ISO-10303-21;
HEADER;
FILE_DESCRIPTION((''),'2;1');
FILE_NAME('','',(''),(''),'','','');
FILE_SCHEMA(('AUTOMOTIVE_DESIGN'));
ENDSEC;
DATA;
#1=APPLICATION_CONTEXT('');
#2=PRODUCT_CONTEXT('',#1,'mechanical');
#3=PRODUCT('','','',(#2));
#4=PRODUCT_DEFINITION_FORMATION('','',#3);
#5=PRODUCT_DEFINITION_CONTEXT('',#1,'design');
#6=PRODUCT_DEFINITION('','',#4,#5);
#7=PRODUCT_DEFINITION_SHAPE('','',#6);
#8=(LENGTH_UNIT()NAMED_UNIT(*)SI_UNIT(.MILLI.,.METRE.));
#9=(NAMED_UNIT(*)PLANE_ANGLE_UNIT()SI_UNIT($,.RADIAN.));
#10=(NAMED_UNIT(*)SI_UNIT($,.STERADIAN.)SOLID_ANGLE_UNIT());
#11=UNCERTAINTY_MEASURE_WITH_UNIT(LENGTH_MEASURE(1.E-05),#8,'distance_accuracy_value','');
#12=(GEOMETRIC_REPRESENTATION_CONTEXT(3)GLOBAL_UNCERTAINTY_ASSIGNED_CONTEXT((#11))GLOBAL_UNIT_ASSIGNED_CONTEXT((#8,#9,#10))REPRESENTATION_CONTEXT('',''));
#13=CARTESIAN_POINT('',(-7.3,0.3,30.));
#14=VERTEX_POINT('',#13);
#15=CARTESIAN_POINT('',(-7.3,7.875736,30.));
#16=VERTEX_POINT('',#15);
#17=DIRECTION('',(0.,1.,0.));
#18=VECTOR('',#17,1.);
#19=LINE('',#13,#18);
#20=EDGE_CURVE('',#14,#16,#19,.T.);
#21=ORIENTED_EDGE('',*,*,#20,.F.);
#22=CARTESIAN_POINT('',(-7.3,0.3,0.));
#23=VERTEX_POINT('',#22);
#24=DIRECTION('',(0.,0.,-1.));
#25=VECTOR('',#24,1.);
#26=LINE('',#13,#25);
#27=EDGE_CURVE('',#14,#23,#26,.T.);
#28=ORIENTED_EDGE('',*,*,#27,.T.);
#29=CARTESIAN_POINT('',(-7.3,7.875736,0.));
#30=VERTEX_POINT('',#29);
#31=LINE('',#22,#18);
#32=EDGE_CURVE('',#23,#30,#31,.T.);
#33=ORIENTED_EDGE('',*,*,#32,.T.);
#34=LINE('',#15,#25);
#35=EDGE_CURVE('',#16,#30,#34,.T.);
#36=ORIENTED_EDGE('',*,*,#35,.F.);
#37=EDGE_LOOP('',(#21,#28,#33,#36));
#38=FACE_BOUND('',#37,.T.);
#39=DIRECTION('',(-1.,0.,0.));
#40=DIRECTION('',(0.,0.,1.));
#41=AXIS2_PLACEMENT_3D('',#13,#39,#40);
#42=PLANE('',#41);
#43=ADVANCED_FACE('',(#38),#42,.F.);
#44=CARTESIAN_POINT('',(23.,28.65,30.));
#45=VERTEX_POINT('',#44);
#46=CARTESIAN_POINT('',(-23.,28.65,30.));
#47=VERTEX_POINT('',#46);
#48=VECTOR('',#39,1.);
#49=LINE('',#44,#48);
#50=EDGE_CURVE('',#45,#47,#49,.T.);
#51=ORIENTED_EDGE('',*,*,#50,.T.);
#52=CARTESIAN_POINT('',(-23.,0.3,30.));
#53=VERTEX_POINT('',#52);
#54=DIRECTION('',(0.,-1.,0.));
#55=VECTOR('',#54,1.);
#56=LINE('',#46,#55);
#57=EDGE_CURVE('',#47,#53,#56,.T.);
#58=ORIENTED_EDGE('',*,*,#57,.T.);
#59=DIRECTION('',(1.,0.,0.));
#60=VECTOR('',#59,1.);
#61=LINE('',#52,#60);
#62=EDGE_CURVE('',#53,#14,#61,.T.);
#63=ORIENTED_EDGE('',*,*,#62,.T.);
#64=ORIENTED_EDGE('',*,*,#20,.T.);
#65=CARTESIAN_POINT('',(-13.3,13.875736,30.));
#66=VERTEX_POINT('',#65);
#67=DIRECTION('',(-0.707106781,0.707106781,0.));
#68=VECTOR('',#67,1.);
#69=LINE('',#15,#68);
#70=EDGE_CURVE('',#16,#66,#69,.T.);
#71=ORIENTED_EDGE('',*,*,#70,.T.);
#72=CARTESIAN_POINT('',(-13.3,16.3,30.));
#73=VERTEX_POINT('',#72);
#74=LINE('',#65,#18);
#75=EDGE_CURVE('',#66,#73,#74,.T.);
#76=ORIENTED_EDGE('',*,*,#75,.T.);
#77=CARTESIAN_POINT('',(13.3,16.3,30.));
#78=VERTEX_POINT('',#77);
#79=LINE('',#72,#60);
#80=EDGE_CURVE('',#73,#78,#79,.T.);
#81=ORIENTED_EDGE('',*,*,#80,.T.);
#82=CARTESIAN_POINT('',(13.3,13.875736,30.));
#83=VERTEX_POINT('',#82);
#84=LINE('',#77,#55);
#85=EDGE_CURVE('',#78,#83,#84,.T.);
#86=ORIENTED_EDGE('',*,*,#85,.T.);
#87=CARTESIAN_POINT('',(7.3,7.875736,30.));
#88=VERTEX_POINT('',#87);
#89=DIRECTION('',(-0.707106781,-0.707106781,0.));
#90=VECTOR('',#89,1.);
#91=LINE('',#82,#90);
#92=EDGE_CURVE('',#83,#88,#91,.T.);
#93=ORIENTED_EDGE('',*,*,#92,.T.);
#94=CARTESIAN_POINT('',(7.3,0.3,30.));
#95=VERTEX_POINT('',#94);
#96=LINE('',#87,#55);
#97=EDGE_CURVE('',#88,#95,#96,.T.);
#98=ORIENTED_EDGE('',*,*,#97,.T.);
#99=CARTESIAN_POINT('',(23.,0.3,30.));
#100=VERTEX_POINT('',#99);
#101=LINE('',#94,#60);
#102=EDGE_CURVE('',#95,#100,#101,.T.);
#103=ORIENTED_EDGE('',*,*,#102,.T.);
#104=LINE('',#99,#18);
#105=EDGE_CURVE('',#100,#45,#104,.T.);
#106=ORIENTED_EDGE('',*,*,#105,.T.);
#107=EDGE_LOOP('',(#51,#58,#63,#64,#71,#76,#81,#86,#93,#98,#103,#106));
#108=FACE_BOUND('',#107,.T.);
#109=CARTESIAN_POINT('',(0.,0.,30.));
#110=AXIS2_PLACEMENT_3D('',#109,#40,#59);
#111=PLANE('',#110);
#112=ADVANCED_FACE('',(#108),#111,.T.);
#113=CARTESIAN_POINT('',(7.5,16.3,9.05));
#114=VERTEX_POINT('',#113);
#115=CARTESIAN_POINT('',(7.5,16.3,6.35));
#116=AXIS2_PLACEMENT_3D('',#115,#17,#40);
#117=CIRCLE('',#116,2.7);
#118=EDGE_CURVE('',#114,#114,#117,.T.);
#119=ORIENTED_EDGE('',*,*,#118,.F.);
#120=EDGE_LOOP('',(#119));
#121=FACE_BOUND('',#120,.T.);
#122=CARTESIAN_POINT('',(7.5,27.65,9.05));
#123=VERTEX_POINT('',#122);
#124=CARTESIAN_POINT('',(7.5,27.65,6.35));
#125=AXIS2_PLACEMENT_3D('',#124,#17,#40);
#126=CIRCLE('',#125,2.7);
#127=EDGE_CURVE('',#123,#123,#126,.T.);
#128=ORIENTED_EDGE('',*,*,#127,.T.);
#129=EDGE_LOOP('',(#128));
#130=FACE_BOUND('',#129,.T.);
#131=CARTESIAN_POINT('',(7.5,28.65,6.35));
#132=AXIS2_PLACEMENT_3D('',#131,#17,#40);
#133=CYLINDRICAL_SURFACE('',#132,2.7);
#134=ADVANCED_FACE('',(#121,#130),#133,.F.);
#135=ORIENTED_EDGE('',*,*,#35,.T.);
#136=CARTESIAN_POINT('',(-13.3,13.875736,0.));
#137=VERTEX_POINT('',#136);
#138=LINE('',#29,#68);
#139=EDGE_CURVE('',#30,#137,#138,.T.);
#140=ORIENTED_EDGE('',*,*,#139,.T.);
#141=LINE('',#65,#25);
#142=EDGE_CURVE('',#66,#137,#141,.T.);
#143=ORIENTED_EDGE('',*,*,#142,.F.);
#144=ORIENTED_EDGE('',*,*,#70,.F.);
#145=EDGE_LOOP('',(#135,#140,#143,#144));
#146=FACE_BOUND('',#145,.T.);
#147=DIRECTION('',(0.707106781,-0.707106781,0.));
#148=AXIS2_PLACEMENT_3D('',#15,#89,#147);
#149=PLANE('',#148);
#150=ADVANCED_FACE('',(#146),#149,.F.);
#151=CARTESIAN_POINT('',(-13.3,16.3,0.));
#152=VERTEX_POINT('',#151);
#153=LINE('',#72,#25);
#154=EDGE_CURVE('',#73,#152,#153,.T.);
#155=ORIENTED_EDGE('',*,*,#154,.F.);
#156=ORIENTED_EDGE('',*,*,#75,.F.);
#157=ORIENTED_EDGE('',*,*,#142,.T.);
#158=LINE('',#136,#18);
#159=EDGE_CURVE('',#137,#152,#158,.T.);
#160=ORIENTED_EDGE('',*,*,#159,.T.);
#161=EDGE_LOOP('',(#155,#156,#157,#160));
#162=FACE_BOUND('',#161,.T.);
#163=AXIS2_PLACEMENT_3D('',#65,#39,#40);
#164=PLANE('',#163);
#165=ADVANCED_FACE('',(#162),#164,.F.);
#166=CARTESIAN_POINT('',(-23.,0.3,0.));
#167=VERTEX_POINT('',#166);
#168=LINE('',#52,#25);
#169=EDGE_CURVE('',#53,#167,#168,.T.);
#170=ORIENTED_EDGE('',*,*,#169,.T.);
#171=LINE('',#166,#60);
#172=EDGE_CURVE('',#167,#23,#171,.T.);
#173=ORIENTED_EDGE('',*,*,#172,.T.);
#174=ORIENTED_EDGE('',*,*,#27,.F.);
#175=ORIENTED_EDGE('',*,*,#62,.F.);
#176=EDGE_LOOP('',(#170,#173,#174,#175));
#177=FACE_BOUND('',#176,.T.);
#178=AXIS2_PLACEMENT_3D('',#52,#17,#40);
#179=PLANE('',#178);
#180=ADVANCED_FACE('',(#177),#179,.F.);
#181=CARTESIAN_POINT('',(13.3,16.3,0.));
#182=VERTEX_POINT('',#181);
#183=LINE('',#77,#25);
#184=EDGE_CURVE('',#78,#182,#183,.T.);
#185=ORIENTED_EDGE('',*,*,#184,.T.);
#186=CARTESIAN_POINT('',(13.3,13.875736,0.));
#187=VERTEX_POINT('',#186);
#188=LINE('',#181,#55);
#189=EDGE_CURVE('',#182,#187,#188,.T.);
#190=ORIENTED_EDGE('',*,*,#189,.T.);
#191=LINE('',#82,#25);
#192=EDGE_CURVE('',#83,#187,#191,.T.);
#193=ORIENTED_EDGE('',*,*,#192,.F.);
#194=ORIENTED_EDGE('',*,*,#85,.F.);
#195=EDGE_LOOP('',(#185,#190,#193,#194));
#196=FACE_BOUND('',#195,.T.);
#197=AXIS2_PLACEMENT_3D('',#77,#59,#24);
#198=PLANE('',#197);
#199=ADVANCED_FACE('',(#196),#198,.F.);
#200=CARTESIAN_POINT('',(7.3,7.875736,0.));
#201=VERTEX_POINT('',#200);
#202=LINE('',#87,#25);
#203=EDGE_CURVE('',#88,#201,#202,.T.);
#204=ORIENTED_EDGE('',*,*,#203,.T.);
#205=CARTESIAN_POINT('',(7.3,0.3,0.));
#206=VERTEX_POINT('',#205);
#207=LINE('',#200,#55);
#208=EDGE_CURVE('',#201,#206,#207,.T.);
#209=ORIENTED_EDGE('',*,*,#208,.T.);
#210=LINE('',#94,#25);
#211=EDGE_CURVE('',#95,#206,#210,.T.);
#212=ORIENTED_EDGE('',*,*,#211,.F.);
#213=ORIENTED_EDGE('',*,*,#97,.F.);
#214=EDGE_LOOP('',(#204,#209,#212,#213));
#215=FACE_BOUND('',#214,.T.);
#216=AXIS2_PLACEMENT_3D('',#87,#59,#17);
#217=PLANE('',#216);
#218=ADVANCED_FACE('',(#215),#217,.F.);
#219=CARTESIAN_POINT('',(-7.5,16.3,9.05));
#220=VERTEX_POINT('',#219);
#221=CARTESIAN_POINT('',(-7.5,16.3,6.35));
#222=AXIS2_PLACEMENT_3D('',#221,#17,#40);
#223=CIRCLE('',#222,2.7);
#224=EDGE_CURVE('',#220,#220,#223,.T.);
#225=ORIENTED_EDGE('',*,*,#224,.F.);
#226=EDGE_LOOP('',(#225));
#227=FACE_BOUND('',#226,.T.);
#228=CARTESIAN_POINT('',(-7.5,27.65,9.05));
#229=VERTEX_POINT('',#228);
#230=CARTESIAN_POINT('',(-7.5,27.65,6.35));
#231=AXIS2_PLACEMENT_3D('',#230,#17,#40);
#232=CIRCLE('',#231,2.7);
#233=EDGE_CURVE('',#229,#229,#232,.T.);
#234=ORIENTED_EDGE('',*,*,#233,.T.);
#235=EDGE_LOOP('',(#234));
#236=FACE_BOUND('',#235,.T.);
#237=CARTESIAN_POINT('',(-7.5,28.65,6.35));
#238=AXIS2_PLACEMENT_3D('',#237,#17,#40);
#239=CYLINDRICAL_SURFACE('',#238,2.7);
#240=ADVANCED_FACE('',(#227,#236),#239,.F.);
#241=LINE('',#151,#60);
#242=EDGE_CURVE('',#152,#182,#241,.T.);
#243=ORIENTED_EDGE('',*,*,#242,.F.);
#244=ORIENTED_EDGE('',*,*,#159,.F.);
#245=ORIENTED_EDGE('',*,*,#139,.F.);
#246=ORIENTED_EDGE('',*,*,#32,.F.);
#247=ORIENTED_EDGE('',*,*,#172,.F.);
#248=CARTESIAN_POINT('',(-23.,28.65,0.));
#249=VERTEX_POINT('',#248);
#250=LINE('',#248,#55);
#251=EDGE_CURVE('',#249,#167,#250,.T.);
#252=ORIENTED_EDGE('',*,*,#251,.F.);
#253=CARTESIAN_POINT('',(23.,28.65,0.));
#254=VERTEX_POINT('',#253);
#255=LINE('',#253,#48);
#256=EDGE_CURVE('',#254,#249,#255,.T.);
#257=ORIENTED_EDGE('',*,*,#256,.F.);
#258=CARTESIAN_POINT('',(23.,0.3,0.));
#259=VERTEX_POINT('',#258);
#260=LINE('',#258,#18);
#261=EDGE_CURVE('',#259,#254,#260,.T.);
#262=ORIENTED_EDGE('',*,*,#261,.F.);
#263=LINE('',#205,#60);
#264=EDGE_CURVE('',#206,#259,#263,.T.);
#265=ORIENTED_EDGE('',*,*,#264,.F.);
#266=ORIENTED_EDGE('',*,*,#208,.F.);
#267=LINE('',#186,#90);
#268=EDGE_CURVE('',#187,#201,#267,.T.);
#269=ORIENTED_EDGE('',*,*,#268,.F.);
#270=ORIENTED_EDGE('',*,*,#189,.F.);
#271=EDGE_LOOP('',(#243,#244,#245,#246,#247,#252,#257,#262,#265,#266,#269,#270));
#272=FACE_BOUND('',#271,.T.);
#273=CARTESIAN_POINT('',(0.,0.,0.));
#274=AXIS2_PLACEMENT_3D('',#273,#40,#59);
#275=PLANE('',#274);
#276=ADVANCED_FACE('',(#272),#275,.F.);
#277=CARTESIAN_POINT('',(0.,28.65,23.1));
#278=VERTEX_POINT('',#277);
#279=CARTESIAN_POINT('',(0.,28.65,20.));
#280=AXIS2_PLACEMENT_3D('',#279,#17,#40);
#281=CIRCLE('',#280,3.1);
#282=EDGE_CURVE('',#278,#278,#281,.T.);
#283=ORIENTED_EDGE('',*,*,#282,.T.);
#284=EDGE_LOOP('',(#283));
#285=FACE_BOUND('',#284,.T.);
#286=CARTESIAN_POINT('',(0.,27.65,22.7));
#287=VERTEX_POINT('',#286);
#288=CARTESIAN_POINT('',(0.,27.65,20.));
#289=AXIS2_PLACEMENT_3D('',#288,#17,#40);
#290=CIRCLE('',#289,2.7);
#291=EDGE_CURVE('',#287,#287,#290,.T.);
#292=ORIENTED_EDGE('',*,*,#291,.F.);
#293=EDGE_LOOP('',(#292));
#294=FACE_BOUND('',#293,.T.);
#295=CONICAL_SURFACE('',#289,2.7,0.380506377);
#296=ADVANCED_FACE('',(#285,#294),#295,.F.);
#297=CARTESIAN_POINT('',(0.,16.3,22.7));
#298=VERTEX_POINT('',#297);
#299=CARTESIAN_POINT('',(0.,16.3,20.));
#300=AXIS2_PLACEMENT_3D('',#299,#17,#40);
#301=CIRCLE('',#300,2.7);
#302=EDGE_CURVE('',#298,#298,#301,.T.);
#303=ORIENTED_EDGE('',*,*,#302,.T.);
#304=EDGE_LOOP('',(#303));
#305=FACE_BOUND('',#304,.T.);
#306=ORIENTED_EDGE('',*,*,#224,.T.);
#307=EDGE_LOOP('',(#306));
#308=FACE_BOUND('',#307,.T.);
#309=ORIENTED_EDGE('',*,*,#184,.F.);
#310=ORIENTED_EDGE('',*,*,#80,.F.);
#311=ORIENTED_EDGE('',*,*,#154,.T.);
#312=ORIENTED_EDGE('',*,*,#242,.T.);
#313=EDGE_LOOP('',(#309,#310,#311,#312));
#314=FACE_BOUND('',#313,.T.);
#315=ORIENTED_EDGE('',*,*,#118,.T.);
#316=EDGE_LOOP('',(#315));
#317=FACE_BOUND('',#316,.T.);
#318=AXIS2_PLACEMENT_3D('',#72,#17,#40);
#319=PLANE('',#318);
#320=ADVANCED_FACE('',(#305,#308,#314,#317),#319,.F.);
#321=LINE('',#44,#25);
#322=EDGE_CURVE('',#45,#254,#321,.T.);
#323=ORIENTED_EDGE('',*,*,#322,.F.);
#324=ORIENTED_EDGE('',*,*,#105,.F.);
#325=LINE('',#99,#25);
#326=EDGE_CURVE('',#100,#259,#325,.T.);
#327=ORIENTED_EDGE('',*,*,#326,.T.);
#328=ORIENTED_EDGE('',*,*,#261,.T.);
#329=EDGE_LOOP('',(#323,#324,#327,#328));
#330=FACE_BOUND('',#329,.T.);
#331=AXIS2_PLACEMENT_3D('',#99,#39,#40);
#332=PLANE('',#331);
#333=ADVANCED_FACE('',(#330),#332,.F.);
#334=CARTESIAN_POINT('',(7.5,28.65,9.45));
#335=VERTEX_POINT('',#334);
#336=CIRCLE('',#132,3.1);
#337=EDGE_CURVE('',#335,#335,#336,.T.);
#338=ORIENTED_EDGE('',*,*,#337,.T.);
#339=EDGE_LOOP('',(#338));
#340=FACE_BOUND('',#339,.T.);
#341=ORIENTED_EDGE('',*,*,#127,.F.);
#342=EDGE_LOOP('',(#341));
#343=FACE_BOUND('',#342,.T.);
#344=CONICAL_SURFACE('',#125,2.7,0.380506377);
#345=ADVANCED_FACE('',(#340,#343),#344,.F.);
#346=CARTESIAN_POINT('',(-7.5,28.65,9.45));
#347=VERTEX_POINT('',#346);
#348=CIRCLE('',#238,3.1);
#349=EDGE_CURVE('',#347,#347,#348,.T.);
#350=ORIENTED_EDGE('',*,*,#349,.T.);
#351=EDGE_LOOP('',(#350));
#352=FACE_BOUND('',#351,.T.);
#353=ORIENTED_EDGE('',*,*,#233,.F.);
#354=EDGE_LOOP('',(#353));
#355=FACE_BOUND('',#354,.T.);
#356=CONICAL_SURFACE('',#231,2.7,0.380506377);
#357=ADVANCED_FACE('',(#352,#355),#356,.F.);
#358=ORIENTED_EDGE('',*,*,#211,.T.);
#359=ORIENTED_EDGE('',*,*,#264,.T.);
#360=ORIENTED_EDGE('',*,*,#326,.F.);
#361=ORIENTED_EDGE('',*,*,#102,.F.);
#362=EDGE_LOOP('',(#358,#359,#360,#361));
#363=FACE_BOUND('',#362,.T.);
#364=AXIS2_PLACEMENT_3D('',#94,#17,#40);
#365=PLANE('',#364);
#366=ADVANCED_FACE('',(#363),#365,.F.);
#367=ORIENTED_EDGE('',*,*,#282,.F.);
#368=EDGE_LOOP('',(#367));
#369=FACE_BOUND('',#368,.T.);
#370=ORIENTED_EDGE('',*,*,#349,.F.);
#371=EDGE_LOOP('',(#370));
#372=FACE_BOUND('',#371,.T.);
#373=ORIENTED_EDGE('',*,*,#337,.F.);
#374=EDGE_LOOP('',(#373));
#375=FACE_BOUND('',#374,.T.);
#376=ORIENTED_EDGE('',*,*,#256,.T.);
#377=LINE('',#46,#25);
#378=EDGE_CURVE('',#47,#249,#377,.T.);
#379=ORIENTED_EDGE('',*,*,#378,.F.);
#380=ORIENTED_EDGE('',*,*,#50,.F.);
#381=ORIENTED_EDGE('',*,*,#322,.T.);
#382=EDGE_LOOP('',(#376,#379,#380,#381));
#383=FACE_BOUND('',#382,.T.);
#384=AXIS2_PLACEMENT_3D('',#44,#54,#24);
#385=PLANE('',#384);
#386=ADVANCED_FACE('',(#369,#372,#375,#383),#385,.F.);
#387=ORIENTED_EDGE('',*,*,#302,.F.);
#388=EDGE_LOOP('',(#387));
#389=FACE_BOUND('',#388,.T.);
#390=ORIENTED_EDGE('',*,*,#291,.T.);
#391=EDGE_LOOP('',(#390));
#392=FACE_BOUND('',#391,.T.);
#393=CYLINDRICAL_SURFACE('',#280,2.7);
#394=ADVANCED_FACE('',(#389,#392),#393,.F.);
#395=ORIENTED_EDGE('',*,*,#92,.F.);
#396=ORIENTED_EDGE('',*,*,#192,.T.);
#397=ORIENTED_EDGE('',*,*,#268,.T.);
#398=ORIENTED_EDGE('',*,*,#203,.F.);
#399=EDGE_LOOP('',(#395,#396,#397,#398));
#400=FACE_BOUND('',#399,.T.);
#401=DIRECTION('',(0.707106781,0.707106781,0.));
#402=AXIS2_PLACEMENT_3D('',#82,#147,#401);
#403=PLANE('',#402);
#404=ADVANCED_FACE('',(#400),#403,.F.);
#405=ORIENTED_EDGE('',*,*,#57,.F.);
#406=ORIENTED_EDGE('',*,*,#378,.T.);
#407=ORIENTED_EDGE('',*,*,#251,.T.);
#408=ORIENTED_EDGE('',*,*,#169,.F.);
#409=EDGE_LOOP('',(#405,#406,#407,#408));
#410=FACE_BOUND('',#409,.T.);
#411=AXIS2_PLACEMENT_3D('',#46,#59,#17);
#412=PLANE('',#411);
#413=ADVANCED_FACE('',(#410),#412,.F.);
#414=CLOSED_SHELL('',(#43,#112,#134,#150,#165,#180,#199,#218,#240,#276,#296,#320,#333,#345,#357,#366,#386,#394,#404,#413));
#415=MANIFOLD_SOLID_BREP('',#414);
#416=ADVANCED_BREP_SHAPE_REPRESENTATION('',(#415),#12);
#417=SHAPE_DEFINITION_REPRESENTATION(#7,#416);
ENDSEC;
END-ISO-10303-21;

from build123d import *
from OCP.BRepFilletAPI import BRepFilletAPI_MakeChamfer

# Parameters (mm, degrees)
BOSS_EXTRUDE1_DEPTH = 30
HOLE1_D             = 5.4
HOLE1_DEPTH         = 12.35
HOLE1_CBORE_D       = 6.2
HOLE1_CBORE_DEPTH   = 1
CHAMFER1_SIZE       = 1
CHAMFER1_SIZE_2     = 0.4


with BuildPart() as part:
    # Sketch1 → Boss-Extrude1 (new body)
    with BuildSketch(Plane.XY):
        Polygon((-7.3, 0.3), (-7.3, 7.875735931), (-13.3, 13.875735931), (-13.3, 16.3), (13.3, 16.3), (13.3, 13.875735931), (7.3, 7.875735931), (7.3, 0.3), (23, 0.3), (23, 28.65), (-23, 28.65), (-23, 0.3), align=None)
    extrude(amount=BOSS_EXTRUDE1_DEPTH)

    # Hole1
    with Locations(Plane(origin=(0, 28.65, 0), x_dir=(1, 0, 0), z_dir=(0, 1, 0))):
        with Locations((-7.5, -6.35), (7.5, -6.35), (0, -20)):
            CounterBoreHole(HOLE1_D / 2, HOLE1_CBORE_D / 2, HOLE1_CBORE_DEPTH, depth=HOLE1_DEPTH)

    # Chamfer1
    chamfer1_edges_1 = [part.edges().sort_by_distance(p)[0] for p in [
        (-3.1, 27.65, 20),
    ]]
    chamfer1_side_1 = [part.faces().sort_by_distance(p)[0] for p in [
        (-3.1, 27.658, 20),
    ]]
    chamfer1_edges_2 = [part.edges().sort_by_distance(p)[0] for p in [
        (4.4, 27.65, 6.35),
    ]]
    chamfer1_side_2 = [part.faces().sort_by_distance(p)[0] for p in [
        (4.4, 27.658, 6.35),
    ]]
    chamfer1_edges_3 = [part.edges().sort_by_distance(p)[0] for p in [
        (-10.6, 27.65, 6.35),
    ]]
    chamfer1_side_3 = [part.faces().sort_by_distance(p)[0] for p in [
        (-10.6, 27.658, 6.35),
    ]]
    chamfer1 = BRepFilletAPI_MakeChamfer(part.part.solid().wrapped)
    for e in chamfer1_edges_1:
        chamfer1.Add(CHAMFER1_SIZE - 0.0001, CHAMFER1_SIZE_2 - 0.0001, e.wrapped, chamfer1_side_1[0].wrapped)
    for e in chamfer1_edges_2:
        chamfer1.Add(CHAMFER1_SIZE - 0.0001, CHAMFER1_SIZE_2 - 0.0001, e.wrapped, chamfer1_side_2[0].wrapped)
    for e in chamfer1_edges_3:
        chamfer1.Add(CHAMFER1_SIZE - 0.0001, CHAMFER1_SIZE_2 - 0.0001, e.wrapped, chamfer1_side_3[0].wrapped)
    add(Compound.cast(chamfer1.Shape()), mode=Mode.REPLACE)  # a hair under: the kernel refuses the full size


solid = part.part
